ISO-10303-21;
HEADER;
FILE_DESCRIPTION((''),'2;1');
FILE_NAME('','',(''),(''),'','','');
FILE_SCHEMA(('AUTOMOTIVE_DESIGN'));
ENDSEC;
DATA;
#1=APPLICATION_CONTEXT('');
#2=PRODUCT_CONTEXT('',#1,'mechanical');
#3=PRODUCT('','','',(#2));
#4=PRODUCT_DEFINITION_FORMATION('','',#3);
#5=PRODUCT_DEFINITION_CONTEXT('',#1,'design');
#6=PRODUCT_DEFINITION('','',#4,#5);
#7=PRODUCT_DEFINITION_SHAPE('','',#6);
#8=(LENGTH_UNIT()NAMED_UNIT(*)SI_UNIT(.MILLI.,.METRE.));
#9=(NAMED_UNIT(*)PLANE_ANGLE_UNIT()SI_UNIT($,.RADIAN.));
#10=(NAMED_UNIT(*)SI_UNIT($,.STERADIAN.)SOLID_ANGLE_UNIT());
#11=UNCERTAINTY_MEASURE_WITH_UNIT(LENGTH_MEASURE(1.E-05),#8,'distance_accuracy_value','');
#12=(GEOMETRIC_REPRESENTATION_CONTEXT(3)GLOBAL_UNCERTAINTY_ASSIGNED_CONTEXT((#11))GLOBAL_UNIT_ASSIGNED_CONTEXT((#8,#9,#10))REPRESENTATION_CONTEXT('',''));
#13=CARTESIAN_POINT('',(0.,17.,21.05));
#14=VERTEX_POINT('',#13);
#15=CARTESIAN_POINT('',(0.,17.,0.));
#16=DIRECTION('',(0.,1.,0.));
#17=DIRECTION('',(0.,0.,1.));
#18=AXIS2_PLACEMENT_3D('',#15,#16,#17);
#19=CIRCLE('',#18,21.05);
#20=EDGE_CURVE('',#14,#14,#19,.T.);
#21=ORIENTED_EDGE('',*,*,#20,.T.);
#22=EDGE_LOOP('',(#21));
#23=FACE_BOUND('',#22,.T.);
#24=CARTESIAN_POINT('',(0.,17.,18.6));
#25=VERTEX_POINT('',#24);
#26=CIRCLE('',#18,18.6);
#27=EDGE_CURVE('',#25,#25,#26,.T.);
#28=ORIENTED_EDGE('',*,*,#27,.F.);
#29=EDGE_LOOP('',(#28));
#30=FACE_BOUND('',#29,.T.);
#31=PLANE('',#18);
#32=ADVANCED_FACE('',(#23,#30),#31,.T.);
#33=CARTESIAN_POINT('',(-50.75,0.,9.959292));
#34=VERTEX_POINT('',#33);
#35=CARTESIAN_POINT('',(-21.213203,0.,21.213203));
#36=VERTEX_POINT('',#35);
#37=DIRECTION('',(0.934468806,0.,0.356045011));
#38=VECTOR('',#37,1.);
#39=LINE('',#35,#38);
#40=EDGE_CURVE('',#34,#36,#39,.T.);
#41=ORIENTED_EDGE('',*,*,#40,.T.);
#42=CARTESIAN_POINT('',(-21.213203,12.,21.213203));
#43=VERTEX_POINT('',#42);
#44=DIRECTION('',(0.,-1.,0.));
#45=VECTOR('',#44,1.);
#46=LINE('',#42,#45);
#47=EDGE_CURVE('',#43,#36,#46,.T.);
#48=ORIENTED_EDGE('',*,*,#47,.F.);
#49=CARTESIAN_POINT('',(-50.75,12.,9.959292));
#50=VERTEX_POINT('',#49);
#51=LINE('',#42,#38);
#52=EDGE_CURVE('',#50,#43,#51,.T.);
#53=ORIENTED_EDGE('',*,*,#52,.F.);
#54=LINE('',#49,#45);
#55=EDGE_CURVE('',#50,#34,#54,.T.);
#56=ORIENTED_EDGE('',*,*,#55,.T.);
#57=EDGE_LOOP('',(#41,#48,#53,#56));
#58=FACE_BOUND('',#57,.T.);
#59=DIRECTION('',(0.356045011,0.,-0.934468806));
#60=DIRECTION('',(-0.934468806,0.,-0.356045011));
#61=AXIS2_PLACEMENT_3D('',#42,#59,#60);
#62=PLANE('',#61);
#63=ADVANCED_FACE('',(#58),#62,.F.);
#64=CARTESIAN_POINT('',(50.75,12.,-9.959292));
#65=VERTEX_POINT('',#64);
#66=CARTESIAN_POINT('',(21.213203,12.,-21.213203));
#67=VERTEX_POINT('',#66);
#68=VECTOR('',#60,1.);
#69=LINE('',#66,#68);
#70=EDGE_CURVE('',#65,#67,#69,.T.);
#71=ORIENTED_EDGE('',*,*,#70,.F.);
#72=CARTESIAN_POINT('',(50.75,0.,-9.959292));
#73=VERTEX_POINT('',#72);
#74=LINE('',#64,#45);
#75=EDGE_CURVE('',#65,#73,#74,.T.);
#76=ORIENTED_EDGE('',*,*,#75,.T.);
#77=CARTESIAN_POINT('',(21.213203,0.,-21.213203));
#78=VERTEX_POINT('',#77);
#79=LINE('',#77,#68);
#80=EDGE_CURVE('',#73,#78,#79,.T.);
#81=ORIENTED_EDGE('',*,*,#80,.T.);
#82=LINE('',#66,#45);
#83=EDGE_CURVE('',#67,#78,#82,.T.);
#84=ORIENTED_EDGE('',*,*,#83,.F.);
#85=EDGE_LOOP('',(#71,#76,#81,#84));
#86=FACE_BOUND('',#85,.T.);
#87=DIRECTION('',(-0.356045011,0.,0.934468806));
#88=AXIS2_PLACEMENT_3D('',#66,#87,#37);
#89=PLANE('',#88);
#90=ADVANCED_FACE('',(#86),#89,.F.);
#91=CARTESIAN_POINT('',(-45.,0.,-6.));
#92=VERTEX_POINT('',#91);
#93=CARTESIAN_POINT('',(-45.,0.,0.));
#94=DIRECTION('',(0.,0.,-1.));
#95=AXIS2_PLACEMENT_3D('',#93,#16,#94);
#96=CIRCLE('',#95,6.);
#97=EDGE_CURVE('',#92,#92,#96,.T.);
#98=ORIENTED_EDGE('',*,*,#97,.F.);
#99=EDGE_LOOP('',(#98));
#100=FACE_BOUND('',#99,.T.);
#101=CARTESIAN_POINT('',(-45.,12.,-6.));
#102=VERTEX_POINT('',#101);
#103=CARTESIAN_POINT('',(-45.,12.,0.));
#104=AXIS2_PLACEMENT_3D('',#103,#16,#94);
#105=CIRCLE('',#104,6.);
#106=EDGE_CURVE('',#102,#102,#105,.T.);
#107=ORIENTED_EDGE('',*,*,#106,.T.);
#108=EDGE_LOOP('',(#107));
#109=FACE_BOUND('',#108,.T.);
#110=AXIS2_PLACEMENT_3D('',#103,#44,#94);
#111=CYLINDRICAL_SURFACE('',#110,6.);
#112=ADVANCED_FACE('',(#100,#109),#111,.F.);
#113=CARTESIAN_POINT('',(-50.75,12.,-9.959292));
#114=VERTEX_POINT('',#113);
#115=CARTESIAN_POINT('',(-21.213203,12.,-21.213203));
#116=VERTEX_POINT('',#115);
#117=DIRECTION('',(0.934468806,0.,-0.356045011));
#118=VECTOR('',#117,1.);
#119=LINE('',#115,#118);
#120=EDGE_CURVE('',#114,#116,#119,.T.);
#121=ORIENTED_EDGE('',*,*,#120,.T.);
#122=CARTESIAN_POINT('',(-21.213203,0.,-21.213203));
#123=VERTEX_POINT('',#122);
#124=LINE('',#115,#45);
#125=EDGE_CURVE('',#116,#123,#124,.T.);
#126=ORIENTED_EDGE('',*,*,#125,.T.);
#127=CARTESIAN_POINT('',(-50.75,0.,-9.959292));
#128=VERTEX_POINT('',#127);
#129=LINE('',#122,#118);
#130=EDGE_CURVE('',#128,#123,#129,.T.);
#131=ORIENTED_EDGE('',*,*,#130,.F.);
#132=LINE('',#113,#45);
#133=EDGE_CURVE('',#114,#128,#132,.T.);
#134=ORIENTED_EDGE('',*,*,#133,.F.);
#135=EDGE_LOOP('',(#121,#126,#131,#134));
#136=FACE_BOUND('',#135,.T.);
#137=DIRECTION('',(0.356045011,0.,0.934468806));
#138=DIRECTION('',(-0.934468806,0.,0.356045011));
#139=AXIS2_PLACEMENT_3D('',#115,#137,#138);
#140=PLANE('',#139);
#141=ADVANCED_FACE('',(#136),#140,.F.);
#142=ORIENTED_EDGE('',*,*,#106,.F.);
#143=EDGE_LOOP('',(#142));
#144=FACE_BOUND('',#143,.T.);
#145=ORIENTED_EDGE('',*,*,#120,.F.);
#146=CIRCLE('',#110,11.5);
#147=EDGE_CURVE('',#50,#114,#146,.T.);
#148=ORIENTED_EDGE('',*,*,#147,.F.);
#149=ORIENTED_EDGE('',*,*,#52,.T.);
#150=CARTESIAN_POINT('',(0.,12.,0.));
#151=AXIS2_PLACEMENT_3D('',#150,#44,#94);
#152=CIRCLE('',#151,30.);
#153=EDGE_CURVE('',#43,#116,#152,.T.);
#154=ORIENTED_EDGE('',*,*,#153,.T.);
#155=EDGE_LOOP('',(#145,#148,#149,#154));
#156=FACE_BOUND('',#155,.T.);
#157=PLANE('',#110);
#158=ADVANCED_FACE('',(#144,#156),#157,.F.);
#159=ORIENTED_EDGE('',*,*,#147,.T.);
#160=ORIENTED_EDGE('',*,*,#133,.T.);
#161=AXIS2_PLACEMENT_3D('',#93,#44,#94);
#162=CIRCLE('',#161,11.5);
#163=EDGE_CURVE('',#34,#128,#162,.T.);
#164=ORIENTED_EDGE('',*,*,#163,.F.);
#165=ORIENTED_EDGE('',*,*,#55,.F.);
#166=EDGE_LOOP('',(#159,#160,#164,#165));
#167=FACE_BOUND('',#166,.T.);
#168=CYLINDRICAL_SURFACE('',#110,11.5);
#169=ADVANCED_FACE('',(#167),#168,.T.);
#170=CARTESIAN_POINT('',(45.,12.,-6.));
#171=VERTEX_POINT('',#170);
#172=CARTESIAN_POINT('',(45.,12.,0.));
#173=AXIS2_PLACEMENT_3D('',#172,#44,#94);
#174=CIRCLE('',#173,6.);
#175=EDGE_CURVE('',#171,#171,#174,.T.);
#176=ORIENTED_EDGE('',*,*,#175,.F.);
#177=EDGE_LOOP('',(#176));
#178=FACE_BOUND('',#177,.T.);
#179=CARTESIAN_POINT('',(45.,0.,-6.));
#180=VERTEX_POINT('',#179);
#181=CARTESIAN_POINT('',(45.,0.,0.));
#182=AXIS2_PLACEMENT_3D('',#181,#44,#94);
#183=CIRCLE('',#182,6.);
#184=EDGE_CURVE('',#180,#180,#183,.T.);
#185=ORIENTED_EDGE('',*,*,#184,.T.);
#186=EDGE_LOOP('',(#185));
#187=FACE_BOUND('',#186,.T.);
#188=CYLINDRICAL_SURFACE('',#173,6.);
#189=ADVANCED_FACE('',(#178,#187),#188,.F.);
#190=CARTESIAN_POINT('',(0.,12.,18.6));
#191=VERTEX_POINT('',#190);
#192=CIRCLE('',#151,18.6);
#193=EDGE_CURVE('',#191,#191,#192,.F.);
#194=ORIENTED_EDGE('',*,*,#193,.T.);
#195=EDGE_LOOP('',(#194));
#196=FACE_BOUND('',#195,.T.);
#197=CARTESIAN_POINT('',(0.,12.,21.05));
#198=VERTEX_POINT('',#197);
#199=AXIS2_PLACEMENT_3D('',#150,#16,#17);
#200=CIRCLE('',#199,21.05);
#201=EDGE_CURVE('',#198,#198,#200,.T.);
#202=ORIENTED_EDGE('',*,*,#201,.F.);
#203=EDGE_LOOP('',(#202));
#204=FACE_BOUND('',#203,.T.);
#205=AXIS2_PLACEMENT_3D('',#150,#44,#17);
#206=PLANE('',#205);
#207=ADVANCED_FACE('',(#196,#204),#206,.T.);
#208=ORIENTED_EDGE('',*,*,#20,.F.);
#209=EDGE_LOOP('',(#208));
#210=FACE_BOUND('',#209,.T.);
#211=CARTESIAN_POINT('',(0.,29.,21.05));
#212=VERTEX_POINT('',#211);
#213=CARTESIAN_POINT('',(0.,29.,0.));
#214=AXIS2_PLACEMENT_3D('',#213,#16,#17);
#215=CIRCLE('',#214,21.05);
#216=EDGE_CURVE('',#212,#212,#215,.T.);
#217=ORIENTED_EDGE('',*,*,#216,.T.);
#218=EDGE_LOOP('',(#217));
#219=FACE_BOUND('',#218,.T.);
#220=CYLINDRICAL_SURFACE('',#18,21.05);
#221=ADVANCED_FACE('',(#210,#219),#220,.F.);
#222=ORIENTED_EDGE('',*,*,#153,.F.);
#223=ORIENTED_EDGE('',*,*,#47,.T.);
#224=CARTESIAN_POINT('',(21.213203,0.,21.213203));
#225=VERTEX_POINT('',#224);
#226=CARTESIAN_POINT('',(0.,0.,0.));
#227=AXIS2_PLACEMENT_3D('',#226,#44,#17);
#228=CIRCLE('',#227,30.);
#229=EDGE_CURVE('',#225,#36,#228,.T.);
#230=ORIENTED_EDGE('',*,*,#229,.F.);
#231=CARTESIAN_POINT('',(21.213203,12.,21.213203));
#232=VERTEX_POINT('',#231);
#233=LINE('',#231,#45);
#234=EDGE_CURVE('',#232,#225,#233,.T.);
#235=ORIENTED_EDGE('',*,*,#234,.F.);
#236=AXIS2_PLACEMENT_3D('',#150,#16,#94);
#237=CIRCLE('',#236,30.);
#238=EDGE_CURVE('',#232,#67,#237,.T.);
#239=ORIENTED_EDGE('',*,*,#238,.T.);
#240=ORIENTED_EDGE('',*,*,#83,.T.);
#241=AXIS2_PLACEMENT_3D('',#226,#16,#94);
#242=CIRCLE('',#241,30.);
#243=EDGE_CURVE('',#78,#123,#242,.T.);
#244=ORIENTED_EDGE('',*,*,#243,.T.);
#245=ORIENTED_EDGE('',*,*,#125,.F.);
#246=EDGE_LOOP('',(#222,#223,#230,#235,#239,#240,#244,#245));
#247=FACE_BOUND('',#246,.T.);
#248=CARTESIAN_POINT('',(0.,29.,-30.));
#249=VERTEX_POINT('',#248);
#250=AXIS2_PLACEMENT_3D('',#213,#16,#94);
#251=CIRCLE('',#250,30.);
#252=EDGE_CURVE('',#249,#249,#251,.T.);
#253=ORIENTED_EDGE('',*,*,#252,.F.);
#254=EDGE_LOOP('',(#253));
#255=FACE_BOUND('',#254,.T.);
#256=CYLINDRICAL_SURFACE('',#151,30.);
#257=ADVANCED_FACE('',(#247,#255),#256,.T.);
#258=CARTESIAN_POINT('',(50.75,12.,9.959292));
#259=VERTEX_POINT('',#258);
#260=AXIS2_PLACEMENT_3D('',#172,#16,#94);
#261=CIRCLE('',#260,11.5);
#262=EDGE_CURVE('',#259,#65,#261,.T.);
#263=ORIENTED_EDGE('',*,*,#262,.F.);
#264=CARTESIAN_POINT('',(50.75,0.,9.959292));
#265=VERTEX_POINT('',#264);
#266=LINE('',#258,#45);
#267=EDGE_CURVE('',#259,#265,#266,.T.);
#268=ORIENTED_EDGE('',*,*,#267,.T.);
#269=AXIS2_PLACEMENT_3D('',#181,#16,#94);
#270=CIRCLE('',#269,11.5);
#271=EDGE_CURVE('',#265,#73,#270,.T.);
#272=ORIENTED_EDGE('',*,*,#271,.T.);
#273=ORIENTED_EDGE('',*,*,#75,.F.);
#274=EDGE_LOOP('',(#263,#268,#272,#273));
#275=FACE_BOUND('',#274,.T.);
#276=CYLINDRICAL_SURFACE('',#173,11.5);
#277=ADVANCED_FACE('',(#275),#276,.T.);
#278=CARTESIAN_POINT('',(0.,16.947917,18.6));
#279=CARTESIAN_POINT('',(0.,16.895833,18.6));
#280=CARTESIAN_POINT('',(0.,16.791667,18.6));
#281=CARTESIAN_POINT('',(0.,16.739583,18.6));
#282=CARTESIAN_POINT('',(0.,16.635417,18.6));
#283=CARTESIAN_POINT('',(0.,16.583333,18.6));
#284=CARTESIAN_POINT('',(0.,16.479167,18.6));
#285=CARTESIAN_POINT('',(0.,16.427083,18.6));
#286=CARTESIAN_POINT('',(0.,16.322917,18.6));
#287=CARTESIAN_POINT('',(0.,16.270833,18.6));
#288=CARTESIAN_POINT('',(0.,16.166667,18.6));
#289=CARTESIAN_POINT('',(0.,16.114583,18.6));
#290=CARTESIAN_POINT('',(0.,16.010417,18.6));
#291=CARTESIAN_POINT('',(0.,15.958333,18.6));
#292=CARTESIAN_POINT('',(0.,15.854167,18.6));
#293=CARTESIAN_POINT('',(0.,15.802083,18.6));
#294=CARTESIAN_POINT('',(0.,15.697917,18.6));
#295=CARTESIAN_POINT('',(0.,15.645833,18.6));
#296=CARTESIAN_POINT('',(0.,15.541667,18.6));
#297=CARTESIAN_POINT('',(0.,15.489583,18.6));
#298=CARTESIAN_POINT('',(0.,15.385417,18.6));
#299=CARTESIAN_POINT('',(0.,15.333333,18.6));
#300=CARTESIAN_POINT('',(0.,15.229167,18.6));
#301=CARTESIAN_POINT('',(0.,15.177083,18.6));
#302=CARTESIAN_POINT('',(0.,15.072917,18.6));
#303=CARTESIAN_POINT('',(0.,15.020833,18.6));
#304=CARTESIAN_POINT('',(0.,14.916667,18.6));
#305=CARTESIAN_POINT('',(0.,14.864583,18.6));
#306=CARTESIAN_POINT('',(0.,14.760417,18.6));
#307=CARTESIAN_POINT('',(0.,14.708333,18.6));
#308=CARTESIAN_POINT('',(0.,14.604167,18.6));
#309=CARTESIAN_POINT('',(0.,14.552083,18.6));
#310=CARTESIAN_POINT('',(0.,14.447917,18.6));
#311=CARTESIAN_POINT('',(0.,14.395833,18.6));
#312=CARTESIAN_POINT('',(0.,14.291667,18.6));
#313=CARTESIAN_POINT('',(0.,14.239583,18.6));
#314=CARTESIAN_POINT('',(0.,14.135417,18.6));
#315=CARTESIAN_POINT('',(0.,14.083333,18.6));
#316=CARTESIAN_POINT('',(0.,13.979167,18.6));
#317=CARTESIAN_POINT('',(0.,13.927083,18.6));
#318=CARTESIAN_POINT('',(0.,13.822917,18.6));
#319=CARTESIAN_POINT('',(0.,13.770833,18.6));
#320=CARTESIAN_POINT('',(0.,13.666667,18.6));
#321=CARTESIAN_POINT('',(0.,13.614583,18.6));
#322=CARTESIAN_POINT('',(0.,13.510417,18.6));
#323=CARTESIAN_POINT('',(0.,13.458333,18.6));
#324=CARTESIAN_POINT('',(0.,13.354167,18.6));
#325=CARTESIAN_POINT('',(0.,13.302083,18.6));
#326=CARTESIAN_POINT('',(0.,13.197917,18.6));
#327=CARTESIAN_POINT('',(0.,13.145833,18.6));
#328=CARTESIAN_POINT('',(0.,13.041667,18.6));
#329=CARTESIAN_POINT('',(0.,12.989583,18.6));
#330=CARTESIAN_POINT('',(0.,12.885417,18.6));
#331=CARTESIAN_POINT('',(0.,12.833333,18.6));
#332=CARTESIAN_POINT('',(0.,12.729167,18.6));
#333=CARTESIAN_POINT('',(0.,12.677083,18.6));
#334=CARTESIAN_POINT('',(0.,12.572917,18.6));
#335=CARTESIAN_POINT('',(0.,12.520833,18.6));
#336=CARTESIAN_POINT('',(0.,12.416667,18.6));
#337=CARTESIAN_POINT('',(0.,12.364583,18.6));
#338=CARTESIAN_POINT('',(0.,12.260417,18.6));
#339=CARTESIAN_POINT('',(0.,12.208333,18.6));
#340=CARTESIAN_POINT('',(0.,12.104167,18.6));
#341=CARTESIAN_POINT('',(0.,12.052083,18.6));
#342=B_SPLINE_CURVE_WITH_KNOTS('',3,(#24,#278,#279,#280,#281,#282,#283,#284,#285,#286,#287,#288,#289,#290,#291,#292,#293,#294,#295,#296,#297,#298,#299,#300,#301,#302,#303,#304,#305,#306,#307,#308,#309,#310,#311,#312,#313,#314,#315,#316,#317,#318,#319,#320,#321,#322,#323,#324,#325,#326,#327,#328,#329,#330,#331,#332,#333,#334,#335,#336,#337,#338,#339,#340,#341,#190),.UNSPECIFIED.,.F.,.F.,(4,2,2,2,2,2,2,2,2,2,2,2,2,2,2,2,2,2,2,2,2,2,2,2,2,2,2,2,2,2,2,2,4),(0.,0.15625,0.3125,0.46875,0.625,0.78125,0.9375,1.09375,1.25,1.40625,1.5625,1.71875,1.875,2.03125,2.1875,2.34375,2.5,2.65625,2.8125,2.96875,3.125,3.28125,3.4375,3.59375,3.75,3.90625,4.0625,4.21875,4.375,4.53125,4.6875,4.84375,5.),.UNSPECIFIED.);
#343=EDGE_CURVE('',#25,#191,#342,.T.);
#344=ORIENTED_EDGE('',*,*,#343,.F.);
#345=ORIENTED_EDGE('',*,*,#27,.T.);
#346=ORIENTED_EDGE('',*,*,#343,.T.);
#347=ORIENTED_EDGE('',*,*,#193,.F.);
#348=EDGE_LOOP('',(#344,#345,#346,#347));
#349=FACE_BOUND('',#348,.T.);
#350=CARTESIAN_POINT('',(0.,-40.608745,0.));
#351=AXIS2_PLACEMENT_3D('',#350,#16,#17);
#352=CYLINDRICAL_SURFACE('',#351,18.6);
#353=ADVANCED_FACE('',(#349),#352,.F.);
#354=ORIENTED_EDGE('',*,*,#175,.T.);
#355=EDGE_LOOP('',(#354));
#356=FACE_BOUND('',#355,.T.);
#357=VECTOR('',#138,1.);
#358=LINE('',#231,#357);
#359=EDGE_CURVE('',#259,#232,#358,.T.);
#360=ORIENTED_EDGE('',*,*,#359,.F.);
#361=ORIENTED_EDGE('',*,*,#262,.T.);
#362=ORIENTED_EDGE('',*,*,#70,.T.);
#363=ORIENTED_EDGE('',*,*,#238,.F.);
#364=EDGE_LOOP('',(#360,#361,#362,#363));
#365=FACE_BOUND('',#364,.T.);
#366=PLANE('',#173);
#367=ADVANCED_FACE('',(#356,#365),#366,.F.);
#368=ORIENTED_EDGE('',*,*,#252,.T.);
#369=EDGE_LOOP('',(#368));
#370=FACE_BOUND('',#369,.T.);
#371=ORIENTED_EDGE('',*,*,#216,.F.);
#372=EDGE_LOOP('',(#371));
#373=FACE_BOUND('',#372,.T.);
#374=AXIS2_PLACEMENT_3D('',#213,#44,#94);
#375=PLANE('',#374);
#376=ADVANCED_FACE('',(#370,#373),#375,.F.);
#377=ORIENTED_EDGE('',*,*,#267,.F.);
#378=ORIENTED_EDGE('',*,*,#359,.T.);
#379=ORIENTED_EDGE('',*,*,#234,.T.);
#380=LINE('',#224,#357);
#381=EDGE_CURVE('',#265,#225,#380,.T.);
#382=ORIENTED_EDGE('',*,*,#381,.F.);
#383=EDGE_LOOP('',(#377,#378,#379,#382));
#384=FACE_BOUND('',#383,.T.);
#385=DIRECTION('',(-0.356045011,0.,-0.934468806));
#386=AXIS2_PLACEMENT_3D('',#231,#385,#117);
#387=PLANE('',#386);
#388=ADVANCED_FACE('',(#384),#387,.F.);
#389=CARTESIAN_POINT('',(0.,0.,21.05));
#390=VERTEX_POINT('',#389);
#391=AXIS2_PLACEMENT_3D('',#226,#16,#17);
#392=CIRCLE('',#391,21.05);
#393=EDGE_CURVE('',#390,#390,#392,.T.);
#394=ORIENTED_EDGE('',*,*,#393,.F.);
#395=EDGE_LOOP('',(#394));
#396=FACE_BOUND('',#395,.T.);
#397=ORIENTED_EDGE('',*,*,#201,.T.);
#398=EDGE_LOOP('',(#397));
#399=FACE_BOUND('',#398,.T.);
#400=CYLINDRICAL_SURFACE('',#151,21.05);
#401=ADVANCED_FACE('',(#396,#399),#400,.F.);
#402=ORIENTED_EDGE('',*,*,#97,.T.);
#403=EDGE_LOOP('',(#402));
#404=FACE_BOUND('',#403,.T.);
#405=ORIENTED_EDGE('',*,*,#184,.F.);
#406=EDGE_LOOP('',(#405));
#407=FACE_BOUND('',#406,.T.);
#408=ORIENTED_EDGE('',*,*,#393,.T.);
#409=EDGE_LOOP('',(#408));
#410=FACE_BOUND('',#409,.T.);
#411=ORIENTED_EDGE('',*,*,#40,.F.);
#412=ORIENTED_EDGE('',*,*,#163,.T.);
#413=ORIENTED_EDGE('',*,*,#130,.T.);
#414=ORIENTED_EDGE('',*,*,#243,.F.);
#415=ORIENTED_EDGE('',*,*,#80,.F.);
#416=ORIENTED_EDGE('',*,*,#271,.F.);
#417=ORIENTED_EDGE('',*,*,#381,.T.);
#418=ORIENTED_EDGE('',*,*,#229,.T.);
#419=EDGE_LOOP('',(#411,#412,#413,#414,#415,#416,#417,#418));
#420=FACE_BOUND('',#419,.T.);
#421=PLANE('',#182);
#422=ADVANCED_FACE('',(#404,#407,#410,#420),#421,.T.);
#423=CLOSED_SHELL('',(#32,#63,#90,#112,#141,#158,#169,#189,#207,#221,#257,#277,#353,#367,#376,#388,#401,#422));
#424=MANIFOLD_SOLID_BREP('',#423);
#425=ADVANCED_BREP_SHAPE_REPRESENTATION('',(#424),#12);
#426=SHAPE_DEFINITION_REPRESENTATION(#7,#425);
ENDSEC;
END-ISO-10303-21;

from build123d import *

# Parameters (mm, degrees)
BOSS_EXTRUDE2_DEPTH  = 12
BOSS_EXTRUDE3_DEPTH  = 17
MIRROR12_DEPTH       = 29
MIRROR12_2_OUTLINE_R = 6
MIRROR12_2_DEPTH     = 12
SKETCH4_R            = 21.05
CUT_EXTRUDE1_DEPTH   = 12
SKETCH5_R            = 18.6
CUT_EXTRUDE2_DEPTH   = 5


# Read off the part's stored shape, not the designer's step: Mirror12
with BuildPart() as part:
    # Sketch1 → Boss-Extrude2 (new body)
    with BuildSketch(Plane(origin=(0, 0, 0), x_dir=(1, 0, 0), z_dir=(0, 1, 0))):
        with BuildLine():
            Line((0, 30), (0, 0))
            Line((0, 0), (39, 0))
            ThreePointArc((39, 0), (45, 6), (51, 0))
            Line((51, 0), (56.5, 0))
            ThreePointArc((56.5, 0), (54.959292144, 5.75), (50.75, 9.959292144))
            Line((50.75, 9.959292144), (21.213203436, 21.213203436))
            ThreePointArc((21.213203436, 21.213203436), (11.480502971, 27.716385975), (0, 30))
        make_face()
    extrude(amount=BOSS_EXTRUDE2_DEPTH)

    # Sketch3 → Boss-Extrude3 (add)
    with BuildSketch(Plane(origin=(0, 12, 0), x_dir=(1, 0, 0), z_dir=(0, 1, 0))):
        with BuildLine():
            Line((0, 30), (0, 0))
            Line((0, 0), (30, 0))
            ThreePointArc((30, 0), (21.213203436, 21.213203436), (0, 30))
        make_face()
    extrude(amount=BOSS_EXTRUDE3_DEPTH)

    # Mirror12 outline → Mirror12 (add)
    with BuildSketch(Plane(origin=(0, 0, 0), x_dir=(1, 0, 0), z_dir=(0, 1, 0))):
        with BuildLine():
            ThreePointArc((0, 30), (-21.213203436, -21.213203436), (30, 0))
            Line((30, 0), (0, 0))
            Line((0, 0), (0, 30))
        make_face()
    extrude(amount=MIRROR12_DEPTH)

    # Mirror12 2 outline → Mirror12 2 (add)
    # profile 1 of 2: a face of its own
    with BuildSketch(Plane(origin=(0, 0, 0), x_dir=(1, 0, 0), z_dir=(0, 1, 0))):
        with BuildLine():
            Line((56.5, 0), (51, 0))
            ThreePointArc((51, 0), (45, -6), (39, 0))
            Line((39, 0), (30, 0))
            ThreePointArc((30, 0), (27.716385975, -11.480502971), (21.213203436, -21.213203436))
            Line((21.213203436, -21.213203436), (50.75, -9.959292144))
            ThreePointArc((50.75, -9.959292144), (54.959292144, -5.75), (56.5, 0))
        make_face()
    # profile 2 of 2: a face of its own
    with BuildSketch(Plane(origin=(0, 0, 0), x_dir=(1, 0, 0), z_dir=(0, 1, 0))):
        with BuildLine():
            ThreePointArc((-21.213203436, -21.213203436), (-30, 0), (-21.213203436, 21.213203436))
            Line((-21.213203436, 21.213203436), (-50.75, 9.959292144))
            ThreePointArc((-50.75, 9.959292144), (-56.5, 0), (-50.75, -9.959292144))
            Line((-50.75, -9.959292144), (-21.213203436, -21.213203436))
        make_face()
        with Locations((-45, 0)):
            Circle(MIRROR12_2_OUTLINE_R, mode=Mode.SUBTRACT)
    extrude(amount=MIRROR12_2_DEPTH)

    # Sketch4 → Cut-Extrude1 (cut)
    with BuildSketch(Plane(origin=(0, 29, 0), x_dir=(1, 0, 0), z_dir=(0, 1, 0))):
        with Locations(Location((0, 0, 0), (0, 0, 270))):
            Circle(SKETCH4_R)
    cut_extrude1 = extrude(amount=-CUT_EXTRUDE1_DEPTH, mode=Mode.SUBTRACT)

    # Mirror13: Cut-Extrude1 across plane
    add(cut_extrude1.mirror(Plane.ZX.offset(14.5)), mode=Mode.SUBTRACT)

    # Sketch5 → Cut-Extrude2 (cut)
    with BuildSketch(Plane(origin=(0, 17, 0), x_dir=(1, 0, 0), z_dir=(0, 1, 0))):
        with Locations(Location((0, 0, 0), (0, 0, 270))):
            Circle(SKETCH5_R)
    extrude(amount=-CUT_EXTRUDE2_DEPTH, mode=Mode.SUBTRACT)


solid = part.part
